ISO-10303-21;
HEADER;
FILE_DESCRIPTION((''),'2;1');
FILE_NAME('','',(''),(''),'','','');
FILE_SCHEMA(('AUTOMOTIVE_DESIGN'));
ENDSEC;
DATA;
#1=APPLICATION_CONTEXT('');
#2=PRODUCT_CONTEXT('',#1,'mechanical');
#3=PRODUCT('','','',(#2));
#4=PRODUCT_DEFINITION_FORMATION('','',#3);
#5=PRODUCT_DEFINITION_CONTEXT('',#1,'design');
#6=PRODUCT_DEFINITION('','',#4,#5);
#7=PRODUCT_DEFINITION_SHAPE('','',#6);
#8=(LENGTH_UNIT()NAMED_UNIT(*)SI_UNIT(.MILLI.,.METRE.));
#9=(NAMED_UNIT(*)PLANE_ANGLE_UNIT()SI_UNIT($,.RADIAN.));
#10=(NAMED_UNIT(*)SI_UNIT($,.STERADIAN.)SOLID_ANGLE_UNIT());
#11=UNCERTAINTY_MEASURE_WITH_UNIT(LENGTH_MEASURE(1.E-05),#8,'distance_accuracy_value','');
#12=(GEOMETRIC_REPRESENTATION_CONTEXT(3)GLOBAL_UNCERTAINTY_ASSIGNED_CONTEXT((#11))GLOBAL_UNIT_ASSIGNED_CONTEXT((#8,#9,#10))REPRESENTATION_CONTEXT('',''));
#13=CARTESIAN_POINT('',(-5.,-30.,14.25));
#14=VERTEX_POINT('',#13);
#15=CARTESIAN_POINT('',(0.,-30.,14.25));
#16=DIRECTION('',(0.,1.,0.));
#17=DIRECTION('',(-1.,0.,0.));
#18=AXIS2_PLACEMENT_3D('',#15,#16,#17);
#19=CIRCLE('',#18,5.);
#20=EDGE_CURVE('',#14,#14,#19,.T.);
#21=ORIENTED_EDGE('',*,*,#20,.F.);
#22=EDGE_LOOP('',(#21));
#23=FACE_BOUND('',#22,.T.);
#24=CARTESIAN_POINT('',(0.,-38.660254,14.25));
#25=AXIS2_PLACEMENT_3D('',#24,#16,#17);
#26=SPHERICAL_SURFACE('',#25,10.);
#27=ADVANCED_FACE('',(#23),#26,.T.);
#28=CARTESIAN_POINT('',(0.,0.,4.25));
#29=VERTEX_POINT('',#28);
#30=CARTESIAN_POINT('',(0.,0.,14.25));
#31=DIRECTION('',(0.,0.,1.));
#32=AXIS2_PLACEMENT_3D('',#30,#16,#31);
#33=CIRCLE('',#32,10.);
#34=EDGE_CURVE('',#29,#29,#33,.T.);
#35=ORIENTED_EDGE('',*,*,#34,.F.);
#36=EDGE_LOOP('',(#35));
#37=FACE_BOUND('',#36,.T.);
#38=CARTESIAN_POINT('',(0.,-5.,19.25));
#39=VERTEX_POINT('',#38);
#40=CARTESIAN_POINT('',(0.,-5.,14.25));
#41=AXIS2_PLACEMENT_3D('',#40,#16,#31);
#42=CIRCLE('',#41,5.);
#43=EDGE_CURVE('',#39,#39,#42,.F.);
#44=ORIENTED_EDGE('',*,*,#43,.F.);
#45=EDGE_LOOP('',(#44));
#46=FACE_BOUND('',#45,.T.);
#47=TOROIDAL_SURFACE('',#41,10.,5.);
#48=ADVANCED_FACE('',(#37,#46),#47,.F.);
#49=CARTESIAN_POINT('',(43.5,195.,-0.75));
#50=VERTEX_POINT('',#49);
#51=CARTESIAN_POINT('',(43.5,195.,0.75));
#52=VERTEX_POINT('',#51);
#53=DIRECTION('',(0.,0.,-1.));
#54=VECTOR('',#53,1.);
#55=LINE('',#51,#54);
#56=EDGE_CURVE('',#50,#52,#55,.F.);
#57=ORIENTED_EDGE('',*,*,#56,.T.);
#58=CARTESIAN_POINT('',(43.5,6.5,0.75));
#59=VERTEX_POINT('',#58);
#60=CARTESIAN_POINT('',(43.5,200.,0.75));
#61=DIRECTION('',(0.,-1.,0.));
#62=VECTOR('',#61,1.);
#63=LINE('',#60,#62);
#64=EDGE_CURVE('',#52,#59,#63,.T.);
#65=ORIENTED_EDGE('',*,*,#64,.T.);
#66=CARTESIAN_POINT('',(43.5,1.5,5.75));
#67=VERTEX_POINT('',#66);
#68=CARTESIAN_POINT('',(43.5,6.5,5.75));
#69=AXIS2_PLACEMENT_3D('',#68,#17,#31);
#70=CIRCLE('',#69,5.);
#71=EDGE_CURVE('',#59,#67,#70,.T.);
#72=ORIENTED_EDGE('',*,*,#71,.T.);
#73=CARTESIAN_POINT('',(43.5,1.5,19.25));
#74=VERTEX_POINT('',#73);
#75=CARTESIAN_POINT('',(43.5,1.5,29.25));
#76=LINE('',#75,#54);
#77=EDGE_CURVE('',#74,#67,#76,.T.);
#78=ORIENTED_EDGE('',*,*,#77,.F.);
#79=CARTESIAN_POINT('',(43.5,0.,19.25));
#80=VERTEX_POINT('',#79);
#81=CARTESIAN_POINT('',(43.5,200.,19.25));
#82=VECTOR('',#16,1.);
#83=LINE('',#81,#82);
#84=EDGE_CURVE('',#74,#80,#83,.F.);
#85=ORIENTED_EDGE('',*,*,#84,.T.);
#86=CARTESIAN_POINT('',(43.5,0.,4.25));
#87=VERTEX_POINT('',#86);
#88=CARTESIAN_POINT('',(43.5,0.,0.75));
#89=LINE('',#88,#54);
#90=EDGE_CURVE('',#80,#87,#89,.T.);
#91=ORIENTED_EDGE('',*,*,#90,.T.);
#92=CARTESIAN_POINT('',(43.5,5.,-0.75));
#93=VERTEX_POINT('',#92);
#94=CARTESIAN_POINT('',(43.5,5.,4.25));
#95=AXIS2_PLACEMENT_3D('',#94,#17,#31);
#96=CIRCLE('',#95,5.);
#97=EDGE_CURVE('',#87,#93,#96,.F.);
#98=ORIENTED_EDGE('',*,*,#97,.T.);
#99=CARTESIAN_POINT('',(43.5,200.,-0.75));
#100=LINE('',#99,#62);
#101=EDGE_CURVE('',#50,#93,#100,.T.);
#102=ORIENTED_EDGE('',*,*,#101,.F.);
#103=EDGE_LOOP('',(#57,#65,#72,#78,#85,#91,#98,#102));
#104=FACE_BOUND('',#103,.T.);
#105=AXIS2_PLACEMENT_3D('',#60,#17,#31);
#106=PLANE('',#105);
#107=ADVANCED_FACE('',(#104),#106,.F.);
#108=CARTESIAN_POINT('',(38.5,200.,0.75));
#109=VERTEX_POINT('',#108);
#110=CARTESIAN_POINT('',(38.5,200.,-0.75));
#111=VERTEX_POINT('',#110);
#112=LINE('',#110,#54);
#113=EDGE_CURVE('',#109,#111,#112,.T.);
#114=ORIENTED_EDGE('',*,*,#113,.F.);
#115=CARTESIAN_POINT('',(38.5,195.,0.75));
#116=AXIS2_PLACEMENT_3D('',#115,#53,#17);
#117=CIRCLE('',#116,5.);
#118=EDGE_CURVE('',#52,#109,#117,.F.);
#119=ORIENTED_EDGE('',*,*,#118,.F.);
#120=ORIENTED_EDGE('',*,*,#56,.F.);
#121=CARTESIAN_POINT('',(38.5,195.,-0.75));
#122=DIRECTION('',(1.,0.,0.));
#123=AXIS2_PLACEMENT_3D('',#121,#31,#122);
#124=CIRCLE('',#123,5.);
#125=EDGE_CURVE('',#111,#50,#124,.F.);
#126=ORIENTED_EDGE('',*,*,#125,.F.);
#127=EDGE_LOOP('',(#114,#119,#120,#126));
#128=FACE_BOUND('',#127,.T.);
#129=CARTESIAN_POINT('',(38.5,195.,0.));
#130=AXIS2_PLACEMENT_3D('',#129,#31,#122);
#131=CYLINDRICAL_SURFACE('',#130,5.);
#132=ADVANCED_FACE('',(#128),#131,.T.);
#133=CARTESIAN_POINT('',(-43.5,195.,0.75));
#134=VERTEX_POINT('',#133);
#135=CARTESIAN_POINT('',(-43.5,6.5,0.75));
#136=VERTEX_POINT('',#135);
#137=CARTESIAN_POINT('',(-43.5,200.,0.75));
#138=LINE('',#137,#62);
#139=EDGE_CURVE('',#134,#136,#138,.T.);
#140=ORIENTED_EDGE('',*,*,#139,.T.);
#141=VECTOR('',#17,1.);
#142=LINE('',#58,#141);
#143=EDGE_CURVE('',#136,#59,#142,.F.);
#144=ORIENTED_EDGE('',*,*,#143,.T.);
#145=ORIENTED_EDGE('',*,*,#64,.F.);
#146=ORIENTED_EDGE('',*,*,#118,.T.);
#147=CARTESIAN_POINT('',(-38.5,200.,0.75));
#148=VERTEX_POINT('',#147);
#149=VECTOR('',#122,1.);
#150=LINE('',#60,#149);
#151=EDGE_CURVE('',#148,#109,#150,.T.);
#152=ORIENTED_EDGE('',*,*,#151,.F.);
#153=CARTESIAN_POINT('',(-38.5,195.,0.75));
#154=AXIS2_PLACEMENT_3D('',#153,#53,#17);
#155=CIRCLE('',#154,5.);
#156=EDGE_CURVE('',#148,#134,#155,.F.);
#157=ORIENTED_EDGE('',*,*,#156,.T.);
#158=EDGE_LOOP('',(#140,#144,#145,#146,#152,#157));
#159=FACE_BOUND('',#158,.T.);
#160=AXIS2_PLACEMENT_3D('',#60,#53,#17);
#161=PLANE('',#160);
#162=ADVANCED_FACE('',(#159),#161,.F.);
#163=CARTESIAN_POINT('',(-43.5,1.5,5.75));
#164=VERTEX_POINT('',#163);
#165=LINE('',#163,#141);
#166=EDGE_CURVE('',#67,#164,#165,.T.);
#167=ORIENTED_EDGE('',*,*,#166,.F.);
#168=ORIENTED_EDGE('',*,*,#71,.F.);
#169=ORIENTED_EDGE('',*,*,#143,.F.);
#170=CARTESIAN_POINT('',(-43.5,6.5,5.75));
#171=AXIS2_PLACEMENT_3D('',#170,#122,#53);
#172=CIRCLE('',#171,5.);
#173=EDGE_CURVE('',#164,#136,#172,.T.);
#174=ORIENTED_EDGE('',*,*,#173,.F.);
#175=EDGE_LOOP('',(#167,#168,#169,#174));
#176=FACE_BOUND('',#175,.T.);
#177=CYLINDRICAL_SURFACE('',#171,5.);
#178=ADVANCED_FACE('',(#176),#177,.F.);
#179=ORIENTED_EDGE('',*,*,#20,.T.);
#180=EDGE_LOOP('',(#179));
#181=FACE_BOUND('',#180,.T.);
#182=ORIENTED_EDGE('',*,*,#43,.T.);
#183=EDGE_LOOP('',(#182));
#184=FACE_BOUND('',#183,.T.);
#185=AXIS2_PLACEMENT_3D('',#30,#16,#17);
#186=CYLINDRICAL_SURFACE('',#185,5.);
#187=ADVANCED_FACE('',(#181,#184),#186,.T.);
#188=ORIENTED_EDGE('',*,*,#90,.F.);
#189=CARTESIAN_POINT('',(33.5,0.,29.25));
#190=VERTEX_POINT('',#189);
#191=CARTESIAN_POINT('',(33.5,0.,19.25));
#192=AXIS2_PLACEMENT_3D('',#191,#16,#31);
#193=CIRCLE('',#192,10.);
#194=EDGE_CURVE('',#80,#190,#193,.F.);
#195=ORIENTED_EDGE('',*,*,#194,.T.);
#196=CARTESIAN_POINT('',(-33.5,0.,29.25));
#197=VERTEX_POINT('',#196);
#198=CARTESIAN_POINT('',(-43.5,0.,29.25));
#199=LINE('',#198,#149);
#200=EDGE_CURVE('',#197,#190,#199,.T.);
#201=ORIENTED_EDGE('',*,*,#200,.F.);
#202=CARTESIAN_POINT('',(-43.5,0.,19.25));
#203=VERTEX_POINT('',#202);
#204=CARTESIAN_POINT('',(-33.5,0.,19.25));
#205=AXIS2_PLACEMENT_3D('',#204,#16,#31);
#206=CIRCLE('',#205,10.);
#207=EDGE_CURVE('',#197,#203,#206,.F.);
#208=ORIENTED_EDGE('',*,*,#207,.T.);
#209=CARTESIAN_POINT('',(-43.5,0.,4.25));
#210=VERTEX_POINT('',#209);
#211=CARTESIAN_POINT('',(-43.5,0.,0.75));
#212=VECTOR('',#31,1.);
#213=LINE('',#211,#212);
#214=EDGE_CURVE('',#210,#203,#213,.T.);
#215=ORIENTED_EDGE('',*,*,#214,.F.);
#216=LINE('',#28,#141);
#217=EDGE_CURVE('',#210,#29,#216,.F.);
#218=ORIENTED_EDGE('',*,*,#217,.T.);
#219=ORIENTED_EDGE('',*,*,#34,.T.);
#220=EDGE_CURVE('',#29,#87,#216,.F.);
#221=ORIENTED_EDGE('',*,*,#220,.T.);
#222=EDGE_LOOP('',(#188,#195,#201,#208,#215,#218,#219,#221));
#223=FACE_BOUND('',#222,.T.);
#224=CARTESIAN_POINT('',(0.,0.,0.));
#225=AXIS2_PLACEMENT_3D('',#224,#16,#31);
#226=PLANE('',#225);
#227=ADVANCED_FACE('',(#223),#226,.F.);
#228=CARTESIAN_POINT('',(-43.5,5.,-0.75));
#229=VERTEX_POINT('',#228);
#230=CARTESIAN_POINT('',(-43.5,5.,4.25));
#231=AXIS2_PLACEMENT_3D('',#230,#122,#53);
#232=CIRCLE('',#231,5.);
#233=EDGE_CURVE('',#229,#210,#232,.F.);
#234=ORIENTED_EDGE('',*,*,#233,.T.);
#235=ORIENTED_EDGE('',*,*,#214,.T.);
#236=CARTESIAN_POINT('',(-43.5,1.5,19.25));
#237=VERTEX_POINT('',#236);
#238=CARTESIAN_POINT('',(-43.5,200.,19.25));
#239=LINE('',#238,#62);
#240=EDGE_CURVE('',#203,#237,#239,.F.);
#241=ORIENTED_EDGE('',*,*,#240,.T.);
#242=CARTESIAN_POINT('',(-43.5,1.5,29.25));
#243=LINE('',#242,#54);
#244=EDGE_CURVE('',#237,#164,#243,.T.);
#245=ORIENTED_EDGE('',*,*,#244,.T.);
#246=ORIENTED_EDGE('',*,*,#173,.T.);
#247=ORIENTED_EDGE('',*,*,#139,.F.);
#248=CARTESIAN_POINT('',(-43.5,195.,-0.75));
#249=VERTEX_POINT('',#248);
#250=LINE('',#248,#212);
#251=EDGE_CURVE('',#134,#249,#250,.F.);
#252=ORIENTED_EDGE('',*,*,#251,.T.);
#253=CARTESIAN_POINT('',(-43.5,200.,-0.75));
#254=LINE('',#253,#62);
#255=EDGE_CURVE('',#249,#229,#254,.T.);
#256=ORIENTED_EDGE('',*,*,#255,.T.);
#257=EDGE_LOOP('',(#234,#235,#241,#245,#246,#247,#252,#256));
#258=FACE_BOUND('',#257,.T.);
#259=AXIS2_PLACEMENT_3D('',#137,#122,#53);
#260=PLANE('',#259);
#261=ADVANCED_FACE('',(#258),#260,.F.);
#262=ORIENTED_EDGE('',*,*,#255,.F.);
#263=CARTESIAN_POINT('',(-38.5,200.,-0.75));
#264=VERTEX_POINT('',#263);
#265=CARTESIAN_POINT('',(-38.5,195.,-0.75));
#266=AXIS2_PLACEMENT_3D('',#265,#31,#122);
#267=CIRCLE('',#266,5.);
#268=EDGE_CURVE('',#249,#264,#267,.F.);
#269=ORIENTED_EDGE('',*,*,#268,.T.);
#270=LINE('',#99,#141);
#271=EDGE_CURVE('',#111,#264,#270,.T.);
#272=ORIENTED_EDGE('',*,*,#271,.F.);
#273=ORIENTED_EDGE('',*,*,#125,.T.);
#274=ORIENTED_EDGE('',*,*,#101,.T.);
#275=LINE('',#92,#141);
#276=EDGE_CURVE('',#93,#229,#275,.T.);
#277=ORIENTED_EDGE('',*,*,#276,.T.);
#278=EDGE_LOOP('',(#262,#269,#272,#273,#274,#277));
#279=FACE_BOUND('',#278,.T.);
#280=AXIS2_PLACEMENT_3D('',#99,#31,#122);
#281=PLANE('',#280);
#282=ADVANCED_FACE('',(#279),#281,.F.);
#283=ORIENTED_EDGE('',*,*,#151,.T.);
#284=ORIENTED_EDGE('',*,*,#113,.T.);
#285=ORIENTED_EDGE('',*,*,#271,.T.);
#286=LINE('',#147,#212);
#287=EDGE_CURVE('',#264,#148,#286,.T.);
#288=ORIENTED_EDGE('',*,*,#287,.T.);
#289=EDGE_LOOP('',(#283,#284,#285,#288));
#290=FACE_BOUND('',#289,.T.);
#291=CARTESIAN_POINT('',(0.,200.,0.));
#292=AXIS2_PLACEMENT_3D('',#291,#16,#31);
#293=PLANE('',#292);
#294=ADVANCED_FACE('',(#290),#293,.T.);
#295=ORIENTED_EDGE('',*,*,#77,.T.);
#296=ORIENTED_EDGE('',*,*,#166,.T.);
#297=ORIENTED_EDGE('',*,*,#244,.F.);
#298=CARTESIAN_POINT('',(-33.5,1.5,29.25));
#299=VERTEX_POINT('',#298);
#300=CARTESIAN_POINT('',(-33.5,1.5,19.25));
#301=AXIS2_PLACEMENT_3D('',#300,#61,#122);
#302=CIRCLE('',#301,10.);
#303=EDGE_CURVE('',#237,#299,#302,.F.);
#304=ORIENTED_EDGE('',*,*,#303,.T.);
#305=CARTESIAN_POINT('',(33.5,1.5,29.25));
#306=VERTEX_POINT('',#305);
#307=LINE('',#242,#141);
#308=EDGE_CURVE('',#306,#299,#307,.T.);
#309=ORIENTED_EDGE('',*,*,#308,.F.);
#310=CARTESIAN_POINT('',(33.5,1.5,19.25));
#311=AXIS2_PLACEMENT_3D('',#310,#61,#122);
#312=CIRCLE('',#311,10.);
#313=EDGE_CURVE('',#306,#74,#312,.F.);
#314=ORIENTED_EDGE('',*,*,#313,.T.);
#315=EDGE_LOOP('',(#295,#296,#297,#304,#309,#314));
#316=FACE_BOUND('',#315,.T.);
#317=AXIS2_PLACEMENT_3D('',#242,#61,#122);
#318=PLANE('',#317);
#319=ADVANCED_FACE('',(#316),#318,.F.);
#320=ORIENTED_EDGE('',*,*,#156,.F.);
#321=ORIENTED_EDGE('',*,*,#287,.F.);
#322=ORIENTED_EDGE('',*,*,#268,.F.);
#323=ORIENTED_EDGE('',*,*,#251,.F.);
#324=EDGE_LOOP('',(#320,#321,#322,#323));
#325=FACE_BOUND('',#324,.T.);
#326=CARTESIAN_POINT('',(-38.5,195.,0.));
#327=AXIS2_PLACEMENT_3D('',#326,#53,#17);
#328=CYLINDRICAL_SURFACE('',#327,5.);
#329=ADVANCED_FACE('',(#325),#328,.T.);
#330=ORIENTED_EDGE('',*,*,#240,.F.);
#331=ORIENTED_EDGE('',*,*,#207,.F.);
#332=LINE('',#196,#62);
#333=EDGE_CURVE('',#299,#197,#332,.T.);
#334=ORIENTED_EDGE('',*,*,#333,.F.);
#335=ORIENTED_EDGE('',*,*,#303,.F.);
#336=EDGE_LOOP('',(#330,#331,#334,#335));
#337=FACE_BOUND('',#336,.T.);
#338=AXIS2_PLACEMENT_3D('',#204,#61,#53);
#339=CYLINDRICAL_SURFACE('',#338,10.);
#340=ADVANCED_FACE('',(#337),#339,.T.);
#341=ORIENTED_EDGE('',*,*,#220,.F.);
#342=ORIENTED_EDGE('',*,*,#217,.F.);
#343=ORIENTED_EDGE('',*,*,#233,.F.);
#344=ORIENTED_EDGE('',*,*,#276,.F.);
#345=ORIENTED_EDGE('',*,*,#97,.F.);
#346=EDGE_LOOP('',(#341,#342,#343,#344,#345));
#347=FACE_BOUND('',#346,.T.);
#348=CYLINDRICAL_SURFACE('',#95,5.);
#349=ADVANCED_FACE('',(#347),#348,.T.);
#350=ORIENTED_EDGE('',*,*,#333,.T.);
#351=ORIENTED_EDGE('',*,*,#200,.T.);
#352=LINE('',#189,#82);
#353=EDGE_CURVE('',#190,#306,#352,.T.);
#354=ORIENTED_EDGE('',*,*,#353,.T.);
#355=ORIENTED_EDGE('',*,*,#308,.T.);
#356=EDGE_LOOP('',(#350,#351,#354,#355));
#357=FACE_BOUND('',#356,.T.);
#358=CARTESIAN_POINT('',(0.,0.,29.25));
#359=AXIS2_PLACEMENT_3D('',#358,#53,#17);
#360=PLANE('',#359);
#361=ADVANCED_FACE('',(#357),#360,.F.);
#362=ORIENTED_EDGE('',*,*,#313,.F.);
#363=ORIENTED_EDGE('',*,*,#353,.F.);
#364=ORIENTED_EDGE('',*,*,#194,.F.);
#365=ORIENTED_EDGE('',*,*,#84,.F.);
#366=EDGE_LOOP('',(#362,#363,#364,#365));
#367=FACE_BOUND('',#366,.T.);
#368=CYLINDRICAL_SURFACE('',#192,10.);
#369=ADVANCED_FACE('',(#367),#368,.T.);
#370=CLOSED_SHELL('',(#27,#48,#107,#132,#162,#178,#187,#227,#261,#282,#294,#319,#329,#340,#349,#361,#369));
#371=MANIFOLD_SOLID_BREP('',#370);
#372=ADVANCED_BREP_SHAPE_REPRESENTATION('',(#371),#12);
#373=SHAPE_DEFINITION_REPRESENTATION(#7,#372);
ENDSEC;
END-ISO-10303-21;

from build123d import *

# Parameters (mm, degrees)
SKETCH1_W           = 87
SKETCH1_H           = 1.5
BOSS_EXTRUDE1_DEPTH = 200
SKETCH2_W           = 87
SKETCH2_H           = 1.5
BOSS_EXTRUDE2_DEPTH = 28.5
FILLET1_R           = 5
FILLET2_R           = 5
FILLET3_R           = 5
FILLET4_R           = 10


with BuildPart() as part:
    # Sketch1 → Boss-Extrude1 (new body)
    with BuildSketch(Plane(origin=(0, 0, 0), x_dir=(1, 0, 0), z_dir=(0, 1, 0))):
        Rectangle(SKETCH1_W, SKETCH1_H)
    extrude(amount=BOSS_EXTRUDE1_DEPTH)

    # Sketch2 → Boss-Extrude2 (add)
    with BuildSketch(Plane.XY.offset(0.75)):
        with Locations((0, 0.75)):
            Rectangle(SKETCH2_W, SKETCH2_H)
    extrude(amount=BOSS_EXTRUDE2_DEPTH)

    # Fillet1
    fillet1_edges = [part.edges().sort_by_distance(p)[0] for p in [
        (0, 1.5, 0.75),
        (0, 0, -0.75),
    ]]
    fillet(fillet1_edges, radius=FILLET1_R)

    # Sketch4 → Revolve1 (revolve)
    with BuildSketch(Plane.XY.offset(14.25), mode=Mode.PRIVATE) as revolve1_sk:
        with BuildLine():
            Line((5, 0), (5, -30))
            ThreePointArc((5, -30), (9.659258263, -41.248444489), (0, -48.660254038))
            Line((0, -48.660254038), (0, 0))
            Line((0, 0), (0, 0.59177988))
            Line((0, 0.59177988), (5, 0.59177988))
            Line((5, 0.59177988), (5, 0))
        make_face()
    revolve(revolve1_sk.sketch.rotate(Axis((0, 0, 14.25), (0, -1, 0)), 180), axis=Axis((0, 0, 14.25), (0, -1, 0)))

    # Fillet2
    fillet2_edges = [part.edges().sort_by_distance(p)[0] for p in [
        (5, 0, 14.25),
    ]]
    fillet(fillet2_edges, radius=FILLET2_R - 0.0001)  # a hair under: the kernel refuses the full size

    # Fillet3
    fillet3_edges = [part.edges().sort_by_distance(p)[0] for p in [
        (43.5, 200, 0),
        (-43.5, 200, 0),
    ]]
    fillet(fillet3_edges, radius=FILLET3_R)

    # Fillet4
    fillet4_edges = [part.edges().sort_by_distance(p)[0] for p in [
        (-43.5, 0.75, 29.25),
        (43.5, 0.75, 29.25),
    ]]
    fillet(fillet4_edges, radius=FILLET4_R)


solid = part.part
